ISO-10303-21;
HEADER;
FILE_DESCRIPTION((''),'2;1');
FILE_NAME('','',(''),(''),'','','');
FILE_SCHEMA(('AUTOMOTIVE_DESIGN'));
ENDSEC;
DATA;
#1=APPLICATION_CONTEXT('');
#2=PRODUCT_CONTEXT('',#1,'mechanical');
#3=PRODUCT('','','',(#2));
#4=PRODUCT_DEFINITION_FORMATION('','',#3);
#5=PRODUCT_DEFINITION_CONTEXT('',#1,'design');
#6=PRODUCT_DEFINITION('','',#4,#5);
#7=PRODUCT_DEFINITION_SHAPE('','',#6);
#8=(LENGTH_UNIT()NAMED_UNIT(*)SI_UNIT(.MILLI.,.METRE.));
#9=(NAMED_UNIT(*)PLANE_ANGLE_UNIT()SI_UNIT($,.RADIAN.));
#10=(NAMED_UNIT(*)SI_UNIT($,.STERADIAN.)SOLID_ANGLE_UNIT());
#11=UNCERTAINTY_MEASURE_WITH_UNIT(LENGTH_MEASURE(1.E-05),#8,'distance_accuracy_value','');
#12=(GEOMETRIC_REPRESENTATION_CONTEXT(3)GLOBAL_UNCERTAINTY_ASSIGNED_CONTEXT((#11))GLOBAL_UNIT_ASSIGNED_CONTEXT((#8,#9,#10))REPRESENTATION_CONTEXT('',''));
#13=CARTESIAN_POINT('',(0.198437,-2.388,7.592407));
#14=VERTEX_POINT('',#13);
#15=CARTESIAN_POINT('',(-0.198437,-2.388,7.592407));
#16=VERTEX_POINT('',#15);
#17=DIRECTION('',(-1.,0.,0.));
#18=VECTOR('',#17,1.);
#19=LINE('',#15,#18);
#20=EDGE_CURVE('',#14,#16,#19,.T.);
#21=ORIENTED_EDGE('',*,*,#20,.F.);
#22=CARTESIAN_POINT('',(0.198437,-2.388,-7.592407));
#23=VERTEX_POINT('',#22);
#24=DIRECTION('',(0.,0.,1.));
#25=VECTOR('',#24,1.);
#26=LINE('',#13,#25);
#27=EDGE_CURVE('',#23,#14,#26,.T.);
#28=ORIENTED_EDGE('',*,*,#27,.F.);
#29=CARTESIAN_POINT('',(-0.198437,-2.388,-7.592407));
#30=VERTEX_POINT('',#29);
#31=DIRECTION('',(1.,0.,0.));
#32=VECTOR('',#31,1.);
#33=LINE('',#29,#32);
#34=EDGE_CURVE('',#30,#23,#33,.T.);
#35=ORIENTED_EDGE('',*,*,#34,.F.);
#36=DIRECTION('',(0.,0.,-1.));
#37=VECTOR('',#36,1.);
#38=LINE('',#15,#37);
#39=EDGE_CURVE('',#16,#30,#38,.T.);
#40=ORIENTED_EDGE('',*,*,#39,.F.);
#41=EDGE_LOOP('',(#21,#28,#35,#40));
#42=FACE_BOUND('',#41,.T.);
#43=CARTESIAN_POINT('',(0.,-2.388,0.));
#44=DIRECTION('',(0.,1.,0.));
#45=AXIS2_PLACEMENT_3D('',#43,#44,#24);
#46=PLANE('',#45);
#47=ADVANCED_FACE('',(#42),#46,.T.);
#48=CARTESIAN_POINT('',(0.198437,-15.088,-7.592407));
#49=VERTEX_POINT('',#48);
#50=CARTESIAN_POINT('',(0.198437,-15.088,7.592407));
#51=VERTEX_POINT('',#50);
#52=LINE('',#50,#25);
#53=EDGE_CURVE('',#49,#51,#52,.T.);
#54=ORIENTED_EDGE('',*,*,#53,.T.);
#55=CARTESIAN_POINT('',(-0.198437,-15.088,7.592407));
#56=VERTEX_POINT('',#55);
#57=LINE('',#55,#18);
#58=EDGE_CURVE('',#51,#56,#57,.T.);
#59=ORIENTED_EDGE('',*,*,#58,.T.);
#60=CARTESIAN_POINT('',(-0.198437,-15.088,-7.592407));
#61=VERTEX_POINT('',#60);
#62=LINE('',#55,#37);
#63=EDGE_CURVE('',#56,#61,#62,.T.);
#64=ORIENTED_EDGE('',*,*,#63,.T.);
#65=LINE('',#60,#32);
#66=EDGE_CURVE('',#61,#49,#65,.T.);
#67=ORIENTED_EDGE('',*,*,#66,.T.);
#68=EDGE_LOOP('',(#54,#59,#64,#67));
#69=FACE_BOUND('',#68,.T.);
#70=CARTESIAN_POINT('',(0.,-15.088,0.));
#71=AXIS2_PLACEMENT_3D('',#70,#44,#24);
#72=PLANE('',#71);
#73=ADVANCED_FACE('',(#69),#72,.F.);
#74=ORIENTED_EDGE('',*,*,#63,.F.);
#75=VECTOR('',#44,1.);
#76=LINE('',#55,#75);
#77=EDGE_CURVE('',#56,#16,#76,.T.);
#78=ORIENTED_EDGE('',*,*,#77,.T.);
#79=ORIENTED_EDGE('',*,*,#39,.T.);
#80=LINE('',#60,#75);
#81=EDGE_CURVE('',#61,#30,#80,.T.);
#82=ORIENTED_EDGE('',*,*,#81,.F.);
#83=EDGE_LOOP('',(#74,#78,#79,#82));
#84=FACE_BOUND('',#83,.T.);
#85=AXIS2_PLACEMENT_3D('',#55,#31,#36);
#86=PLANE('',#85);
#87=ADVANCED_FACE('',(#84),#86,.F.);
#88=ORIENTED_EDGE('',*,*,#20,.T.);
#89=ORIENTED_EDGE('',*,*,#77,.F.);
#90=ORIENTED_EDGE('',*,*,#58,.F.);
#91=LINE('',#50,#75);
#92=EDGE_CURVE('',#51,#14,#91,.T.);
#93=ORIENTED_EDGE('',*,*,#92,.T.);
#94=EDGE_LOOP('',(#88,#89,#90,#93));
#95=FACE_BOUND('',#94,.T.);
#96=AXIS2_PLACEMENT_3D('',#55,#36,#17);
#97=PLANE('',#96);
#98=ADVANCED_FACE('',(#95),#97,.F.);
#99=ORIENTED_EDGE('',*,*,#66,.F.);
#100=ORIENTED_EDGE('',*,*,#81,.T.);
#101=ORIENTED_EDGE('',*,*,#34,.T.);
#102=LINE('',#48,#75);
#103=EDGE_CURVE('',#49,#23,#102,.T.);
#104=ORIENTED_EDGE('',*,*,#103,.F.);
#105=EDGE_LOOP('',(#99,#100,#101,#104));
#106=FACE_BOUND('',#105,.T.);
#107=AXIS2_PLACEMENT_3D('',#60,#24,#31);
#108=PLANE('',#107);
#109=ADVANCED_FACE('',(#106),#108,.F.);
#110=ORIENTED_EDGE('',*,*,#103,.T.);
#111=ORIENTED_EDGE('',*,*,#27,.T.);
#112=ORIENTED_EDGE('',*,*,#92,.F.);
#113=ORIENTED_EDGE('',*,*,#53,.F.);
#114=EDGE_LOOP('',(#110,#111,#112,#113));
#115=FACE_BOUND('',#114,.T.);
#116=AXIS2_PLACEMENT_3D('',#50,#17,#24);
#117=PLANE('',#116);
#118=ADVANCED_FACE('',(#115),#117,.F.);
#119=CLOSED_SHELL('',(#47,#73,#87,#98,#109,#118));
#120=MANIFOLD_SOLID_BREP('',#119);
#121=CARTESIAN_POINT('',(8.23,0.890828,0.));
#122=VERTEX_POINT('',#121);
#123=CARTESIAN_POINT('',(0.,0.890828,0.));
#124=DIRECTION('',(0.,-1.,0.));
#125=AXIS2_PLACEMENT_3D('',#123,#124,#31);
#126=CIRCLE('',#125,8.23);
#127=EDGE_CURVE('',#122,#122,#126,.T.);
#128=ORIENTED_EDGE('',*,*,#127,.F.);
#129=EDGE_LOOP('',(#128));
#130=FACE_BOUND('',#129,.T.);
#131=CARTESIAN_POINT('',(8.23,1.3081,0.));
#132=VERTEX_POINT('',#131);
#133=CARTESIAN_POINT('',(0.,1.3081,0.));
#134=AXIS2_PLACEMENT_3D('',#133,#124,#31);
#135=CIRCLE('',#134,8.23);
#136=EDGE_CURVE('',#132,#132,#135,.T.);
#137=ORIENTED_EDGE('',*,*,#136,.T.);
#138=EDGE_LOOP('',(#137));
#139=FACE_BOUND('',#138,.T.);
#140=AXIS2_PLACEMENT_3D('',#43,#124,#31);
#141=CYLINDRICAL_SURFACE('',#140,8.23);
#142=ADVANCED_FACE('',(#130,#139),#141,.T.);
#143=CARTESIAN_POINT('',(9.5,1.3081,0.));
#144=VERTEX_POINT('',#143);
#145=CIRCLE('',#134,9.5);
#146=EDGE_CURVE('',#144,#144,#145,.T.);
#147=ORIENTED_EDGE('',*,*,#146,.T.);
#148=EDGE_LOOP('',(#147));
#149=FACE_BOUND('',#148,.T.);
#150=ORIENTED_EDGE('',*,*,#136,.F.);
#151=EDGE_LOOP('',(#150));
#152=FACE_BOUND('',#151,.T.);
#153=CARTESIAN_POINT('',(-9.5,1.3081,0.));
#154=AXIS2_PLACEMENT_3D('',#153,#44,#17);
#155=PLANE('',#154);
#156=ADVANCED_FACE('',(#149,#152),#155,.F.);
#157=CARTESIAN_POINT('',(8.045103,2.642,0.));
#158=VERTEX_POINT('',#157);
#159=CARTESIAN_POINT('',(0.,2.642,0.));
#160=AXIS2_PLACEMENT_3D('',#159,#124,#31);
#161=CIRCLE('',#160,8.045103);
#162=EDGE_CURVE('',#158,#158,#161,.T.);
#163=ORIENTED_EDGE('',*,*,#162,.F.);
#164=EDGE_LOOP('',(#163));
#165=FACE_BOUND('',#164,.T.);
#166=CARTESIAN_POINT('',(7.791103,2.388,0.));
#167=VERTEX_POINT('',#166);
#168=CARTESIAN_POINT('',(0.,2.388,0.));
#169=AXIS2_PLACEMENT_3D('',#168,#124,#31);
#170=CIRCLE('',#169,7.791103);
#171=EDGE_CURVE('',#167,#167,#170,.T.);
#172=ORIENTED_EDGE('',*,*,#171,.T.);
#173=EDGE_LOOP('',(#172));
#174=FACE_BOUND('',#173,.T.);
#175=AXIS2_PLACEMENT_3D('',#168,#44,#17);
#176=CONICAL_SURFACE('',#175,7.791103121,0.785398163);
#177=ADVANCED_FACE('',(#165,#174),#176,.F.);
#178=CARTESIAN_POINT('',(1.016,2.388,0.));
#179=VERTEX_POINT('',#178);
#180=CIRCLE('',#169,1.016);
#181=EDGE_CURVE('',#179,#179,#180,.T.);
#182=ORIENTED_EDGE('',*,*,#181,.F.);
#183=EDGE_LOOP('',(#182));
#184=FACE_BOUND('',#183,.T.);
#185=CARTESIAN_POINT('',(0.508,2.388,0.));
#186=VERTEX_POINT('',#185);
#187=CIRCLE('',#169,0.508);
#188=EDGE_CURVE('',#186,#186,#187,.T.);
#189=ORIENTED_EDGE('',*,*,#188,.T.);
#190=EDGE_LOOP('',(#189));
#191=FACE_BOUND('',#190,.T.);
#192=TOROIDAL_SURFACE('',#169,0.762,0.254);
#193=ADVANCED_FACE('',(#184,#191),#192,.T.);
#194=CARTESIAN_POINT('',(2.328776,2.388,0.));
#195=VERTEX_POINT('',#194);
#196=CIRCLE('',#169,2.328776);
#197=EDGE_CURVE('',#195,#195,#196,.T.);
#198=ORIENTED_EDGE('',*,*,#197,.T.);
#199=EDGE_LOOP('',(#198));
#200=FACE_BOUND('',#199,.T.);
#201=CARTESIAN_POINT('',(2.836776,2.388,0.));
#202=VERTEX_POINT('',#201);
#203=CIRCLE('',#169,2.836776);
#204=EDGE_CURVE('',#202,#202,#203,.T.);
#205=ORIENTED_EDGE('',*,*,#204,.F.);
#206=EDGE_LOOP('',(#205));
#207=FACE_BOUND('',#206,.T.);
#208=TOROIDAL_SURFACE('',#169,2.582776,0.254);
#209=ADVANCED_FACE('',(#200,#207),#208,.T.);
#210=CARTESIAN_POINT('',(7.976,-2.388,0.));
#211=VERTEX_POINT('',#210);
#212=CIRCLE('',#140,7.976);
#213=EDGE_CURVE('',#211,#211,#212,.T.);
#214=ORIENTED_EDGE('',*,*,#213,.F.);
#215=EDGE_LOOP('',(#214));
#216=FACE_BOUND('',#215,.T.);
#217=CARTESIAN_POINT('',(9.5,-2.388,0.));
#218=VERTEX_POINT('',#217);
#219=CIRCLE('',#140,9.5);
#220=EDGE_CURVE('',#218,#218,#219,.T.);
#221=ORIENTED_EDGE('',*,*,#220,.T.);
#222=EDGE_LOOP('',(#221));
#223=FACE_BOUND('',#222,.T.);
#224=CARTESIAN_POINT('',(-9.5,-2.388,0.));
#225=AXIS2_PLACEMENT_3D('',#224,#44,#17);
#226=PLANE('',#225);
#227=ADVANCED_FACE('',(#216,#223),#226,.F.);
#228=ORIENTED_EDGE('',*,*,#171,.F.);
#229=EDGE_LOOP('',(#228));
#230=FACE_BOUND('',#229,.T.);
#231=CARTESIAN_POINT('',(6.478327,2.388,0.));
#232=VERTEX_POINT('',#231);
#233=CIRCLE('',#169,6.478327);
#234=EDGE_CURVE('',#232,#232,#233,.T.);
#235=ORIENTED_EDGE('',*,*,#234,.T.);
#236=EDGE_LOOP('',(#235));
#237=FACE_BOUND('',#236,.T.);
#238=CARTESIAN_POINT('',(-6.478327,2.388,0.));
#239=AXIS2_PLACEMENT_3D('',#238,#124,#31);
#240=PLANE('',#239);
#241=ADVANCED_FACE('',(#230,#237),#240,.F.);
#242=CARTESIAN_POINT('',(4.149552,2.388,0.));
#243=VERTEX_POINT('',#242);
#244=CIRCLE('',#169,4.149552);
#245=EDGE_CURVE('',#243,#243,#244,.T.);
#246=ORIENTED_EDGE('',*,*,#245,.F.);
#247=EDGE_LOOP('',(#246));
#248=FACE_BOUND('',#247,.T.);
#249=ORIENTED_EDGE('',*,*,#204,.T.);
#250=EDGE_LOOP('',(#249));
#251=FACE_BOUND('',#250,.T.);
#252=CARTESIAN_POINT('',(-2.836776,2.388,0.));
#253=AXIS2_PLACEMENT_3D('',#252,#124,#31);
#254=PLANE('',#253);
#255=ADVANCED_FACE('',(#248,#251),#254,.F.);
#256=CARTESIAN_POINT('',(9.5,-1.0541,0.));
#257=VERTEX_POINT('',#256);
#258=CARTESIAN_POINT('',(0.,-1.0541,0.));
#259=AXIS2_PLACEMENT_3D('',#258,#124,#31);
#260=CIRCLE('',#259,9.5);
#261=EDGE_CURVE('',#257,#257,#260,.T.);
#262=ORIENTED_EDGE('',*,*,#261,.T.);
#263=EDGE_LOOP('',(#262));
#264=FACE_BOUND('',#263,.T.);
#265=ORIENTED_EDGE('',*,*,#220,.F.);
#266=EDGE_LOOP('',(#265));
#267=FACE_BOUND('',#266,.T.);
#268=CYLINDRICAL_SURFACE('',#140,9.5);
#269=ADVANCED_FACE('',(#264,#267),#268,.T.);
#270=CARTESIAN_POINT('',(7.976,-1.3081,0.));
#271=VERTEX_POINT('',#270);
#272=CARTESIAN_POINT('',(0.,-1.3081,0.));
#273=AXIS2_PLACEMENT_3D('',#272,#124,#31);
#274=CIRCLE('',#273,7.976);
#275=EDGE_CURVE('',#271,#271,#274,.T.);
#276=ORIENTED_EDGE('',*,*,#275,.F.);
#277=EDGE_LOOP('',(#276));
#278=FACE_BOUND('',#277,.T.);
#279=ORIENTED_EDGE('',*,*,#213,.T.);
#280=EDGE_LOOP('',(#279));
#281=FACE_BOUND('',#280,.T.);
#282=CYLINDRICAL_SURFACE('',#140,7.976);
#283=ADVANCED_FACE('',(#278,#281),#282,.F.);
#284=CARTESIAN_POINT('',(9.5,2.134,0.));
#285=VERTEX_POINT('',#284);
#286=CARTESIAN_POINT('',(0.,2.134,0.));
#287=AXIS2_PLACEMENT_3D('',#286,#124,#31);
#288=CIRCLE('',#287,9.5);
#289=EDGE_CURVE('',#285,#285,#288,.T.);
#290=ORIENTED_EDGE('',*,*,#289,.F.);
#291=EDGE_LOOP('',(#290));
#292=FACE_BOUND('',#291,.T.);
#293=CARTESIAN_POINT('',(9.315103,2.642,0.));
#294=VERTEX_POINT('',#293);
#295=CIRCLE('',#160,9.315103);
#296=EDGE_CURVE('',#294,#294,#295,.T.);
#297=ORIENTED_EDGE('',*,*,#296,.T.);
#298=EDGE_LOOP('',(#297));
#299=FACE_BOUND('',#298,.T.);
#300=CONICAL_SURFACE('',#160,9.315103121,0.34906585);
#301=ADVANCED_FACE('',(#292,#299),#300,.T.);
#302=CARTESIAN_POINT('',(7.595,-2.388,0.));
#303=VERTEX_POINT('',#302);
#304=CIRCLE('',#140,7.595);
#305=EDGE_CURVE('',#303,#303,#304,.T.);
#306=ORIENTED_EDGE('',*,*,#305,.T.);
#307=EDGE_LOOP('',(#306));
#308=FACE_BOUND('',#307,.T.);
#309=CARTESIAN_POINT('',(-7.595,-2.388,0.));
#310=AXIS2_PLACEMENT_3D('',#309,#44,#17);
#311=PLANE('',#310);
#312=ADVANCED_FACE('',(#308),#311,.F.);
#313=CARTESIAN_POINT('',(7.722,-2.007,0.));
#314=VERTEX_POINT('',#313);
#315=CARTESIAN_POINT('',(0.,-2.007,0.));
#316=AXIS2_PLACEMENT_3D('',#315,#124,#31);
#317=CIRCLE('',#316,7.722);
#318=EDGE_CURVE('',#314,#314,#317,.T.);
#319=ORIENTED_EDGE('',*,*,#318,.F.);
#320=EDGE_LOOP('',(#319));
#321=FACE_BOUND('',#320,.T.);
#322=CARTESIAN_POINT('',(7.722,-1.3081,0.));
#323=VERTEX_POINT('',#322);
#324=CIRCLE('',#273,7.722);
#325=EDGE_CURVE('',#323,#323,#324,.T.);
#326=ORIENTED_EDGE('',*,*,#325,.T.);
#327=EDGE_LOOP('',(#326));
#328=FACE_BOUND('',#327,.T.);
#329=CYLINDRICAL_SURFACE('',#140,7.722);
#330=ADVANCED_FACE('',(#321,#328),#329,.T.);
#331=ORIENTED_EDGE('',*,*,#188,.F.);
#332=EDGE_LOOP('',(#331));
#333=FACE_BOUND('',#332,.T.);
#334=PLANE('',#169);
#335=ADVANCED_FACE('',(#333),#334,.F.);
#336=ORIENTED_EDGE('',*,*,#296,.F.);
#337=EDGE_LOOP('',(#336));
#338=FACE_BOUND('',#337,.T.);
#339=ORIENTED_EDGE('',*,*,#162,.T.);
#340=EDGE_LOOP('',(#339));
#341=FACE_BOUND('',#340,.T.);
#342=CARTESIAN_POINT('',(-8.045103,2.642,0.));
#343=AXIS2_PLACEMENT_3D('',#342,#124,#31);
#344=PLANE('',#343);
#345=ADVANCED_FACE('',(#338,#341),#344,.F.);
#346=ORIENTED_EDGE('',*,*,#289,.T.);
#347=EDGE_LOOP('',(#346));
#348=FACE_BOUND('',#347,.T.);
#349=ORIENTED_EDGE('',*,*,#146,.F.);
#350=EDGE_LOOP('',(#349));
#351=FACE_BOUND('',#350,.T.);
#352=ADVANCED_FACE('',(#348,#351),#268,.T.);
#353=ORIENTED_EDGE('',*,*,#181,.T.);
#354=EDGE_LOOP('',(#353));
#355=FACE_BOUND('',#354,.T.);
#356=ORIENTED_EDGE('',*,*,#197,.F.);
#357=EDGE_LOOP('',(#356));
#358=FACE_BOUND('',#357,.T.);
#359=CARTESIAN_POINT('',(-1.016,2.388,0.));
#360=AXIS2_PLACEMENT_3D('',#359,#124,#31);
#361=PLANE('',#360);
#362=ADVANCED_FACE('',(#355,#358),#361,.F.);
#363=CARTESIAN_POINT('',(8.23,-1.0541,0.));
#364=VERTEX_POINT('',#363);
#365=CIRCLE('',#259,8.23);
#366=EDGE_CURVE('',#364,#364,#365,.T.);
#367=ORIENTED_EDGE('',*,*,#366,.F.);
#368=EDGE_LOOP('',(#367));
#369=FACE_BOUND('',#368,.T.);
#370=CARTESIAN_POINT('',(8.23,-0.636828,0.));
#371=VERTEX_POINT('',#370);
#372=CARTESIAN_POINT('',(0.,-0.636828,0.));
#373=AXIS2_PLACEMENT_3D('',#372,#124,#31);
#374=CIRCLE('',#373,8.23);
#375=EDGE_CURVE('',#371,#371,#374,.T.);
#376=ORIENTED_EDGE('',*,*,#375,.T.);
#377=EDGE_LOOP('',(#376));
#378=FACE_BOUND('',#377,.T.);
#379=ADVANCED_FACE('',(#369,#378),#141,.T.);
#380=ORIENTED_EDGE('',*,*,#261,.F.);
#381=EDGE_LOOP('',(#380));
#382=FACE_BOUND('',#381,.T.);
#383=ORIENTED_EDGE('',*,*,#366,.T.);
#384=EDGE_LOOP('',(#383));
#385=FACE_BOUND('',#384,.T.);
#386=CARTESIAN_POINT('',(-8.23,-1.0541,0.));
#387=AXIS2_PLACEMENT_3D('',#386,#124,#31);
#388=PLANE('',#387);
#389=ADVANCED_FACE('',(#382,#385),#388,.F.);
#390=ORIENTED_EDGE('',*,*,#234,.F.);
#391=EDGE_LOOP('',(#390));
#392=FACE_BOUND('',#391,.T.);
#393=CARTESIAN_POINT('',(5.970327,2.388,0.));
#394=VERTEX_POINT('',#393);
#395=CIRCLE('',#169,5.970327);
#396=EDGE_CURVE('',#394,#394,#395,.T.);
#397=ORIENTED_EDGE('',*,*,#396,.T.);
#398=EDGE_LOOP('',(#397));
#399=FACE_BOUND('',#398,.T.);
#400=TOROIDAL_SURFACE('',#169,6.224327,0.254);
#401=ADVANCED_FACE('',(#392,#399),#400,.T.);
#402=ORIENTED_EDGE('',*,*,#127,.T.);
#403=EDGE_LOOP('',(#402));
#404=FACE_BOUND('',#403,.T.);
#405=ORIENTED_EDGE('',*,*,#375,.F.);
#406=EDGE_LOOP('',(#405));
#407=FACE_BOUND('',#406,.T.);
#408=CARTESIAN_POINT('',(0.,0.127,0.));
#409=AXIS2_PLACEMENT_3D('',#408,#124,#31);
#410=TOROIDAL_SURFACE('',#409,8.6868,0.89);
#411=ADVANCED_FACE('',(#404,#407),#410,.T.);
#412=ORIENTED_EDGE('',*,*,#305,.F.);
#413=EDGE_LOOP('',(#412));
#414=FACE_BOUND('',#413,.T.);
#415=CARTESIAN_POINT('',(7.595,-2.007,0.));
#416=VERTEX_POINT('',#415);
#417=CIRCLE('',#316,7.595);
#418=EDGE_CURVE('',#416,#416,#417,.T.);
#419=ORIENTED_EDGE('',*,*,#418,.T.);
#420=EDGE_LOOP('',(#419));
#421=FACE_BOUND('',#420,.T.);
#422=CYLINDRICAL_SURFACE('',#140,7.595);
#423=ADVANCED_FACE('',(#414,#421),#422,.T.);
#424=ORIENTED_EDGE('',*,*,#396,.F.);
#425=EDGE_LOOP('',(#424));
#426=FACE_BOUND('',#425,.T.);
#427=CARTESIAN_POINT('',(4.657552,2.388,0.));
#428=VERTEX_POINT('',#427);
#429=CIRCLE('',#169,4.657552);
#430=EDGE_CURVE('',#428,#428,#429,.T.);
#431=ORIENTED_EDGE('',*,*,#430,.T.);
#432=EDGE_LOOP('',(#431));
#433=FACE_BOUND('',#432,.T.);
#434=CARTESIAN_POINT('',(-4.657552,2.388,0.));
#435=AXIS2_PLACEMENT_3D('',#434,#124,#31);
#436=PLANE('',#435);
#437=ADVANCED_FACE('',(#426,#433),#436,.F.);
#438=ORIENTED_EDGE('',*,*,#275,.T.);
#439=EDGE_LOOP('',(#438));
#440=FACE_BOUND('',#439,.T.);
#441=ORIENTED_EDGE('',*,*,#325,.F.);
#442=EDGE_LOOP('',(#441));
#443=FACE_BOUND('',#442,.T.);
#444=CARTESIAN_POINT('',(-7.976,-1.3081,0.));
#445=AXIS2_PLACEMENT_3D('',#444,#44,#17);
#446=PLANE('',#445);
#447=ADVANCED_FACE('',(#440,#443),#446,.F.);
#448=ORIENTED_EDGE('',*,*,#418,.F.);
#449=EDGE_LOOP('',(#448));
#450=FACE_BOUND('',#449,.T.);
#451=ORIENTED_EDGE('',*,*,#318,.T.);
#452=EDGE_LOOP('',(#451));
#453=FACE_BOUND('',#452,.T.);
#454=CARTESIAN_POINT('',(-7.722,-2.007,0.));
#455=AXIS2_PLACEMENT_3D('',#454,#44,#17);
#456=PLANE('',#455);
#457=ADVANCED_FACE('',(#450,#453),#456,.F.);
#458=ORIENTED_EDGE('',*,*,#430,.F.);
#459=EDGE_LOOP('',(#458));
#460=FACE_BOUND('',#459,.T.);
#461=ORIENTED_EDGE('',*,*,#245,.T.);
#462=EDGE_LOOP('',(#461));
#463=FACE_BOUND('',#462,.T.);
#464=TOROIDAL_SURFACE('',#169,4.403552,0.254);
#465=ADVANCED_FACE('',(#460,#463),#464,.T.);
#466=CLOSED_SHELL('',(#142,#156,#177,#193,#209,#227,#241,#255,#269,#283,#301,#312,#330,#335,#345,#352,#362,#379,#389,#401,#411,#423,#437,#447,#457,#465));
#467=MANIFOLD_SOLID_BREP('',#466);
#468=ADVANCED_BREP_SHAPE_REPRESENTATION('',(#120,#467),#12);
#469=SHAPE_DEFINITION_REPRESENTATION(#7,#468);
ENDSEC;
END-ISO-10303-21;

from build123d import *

# Parameters (mm, degrees)
BOSS_EXTRUDE1_START     = -7.592407231
BOSS_EXTRUDE1_OUTLINE_W = 0.396875
BOSS_EXTRUDE1_OUTLINE_H = 12.7
BOSS_EXTRUDE1_DEPTH     = 15.184814462


# Read off the part's stored shape, not the designer's step: Boss-Extrude1
with BuildPart() as part:
    # Sketch1 → Revolve1 (revolve)
    with BuildSketch(Plane.XY, mode=Mode.PRIVATE) as revolve1_sk:
        with BuildLine():
            Line((0, 2.388), (-0.508, 2.388))
            ThreePointArc((-0.508, 2.388), (-0.762, 2.642), (-1.016, 2.388))
            Line((-1.016, 2.388), (-2.32877578, 2.388))
            ThreePointArc((-2.32877578, 2.388), (-2.58277578, 2.642), (-2.83677578, 2.388))
            Line((-2.83677578, 2.388), (-4.14955156, 2.388))
            ThreePointArc((-4.14955156, 2.388), (-4.40355156, 2.642), (-4.65755156, 2.388))
            Line((-4.65755156, 2.388), (-5.970327341, 2.388))
            ThreePointArc((-5.970327341, 2.388), (-6.224327341, 2.642), (-6.478327341, 2.388))
            Line((-6.478327341, 2.388), (-7.791103121, 2.388))
            Line((-7.791103121, 2.388), (-8.045103121, 2.642))
            Line((-8.045103121, 2.642), (-9.315103121, 2.642))
            Line((-9.315103121, 2.642), (-9.5, 2.134))
            Line((-9.5, 2.134), (-9.5, 1.3081))
            Line((-9.5, 1.3081), (-8.23, 1.3081))
            Line((-8.23, 1.3081), (-8.23, 0.890828358))
            ThreePointArc((-8.23, 0.890828358), (-9.5768, 0.127), (-8.23, -0.636828358))
            Line((-8.23, -0.636828358), (-8.23, -1.0541))
            Line((-8.23, -1.0541), (-9.5, -1.0541))
            Line((-9.5, -1.0541), (-9.5, -2.388))
            Line((-9.5, -2.388), (-7.976, -2.388))
            Line((-7.976, -2.388), (-7.976, -1.3081))
            Line((-7.976, -1.3081), (-7.722, -1.3081))
            Line((-7.722, -1.3081), (-7.722, -2.007))
            Line((-7.722, -2.007), (-7.595, -2.007))
            Line((-7.595, -2.007), (-7.595, -2.388))
            Line((-7.595, -2.388), (0, -2.388))
            Line((0, -2.388), (0, 2.388))
        make_face()
    revolve(revolve1_sk.sketch.rotate(Axis((0, -2.388, 0), (0, 1, 0)), 180), axis=Axis((0, -2.388, 0), (0, 1, 0)))


with BuildPart() as body_2:
    # Boss-Extrude1 outline → Boss-Extrude1 (new body)
    with BuildSketch(Plane.XY.offset(BOSS_EXTRUDE1_START)):
        with Locations((0, -8.738)):
            Rectangle(BOSS_EXTRUDE1_OUTLINE_W, BOSS_EXTRUDE1_OUTLINE_H)
    extrude(amount=BOSS_EXTRUDE1_DEPTH)


solid = Compound([part.part, body_2.part])
